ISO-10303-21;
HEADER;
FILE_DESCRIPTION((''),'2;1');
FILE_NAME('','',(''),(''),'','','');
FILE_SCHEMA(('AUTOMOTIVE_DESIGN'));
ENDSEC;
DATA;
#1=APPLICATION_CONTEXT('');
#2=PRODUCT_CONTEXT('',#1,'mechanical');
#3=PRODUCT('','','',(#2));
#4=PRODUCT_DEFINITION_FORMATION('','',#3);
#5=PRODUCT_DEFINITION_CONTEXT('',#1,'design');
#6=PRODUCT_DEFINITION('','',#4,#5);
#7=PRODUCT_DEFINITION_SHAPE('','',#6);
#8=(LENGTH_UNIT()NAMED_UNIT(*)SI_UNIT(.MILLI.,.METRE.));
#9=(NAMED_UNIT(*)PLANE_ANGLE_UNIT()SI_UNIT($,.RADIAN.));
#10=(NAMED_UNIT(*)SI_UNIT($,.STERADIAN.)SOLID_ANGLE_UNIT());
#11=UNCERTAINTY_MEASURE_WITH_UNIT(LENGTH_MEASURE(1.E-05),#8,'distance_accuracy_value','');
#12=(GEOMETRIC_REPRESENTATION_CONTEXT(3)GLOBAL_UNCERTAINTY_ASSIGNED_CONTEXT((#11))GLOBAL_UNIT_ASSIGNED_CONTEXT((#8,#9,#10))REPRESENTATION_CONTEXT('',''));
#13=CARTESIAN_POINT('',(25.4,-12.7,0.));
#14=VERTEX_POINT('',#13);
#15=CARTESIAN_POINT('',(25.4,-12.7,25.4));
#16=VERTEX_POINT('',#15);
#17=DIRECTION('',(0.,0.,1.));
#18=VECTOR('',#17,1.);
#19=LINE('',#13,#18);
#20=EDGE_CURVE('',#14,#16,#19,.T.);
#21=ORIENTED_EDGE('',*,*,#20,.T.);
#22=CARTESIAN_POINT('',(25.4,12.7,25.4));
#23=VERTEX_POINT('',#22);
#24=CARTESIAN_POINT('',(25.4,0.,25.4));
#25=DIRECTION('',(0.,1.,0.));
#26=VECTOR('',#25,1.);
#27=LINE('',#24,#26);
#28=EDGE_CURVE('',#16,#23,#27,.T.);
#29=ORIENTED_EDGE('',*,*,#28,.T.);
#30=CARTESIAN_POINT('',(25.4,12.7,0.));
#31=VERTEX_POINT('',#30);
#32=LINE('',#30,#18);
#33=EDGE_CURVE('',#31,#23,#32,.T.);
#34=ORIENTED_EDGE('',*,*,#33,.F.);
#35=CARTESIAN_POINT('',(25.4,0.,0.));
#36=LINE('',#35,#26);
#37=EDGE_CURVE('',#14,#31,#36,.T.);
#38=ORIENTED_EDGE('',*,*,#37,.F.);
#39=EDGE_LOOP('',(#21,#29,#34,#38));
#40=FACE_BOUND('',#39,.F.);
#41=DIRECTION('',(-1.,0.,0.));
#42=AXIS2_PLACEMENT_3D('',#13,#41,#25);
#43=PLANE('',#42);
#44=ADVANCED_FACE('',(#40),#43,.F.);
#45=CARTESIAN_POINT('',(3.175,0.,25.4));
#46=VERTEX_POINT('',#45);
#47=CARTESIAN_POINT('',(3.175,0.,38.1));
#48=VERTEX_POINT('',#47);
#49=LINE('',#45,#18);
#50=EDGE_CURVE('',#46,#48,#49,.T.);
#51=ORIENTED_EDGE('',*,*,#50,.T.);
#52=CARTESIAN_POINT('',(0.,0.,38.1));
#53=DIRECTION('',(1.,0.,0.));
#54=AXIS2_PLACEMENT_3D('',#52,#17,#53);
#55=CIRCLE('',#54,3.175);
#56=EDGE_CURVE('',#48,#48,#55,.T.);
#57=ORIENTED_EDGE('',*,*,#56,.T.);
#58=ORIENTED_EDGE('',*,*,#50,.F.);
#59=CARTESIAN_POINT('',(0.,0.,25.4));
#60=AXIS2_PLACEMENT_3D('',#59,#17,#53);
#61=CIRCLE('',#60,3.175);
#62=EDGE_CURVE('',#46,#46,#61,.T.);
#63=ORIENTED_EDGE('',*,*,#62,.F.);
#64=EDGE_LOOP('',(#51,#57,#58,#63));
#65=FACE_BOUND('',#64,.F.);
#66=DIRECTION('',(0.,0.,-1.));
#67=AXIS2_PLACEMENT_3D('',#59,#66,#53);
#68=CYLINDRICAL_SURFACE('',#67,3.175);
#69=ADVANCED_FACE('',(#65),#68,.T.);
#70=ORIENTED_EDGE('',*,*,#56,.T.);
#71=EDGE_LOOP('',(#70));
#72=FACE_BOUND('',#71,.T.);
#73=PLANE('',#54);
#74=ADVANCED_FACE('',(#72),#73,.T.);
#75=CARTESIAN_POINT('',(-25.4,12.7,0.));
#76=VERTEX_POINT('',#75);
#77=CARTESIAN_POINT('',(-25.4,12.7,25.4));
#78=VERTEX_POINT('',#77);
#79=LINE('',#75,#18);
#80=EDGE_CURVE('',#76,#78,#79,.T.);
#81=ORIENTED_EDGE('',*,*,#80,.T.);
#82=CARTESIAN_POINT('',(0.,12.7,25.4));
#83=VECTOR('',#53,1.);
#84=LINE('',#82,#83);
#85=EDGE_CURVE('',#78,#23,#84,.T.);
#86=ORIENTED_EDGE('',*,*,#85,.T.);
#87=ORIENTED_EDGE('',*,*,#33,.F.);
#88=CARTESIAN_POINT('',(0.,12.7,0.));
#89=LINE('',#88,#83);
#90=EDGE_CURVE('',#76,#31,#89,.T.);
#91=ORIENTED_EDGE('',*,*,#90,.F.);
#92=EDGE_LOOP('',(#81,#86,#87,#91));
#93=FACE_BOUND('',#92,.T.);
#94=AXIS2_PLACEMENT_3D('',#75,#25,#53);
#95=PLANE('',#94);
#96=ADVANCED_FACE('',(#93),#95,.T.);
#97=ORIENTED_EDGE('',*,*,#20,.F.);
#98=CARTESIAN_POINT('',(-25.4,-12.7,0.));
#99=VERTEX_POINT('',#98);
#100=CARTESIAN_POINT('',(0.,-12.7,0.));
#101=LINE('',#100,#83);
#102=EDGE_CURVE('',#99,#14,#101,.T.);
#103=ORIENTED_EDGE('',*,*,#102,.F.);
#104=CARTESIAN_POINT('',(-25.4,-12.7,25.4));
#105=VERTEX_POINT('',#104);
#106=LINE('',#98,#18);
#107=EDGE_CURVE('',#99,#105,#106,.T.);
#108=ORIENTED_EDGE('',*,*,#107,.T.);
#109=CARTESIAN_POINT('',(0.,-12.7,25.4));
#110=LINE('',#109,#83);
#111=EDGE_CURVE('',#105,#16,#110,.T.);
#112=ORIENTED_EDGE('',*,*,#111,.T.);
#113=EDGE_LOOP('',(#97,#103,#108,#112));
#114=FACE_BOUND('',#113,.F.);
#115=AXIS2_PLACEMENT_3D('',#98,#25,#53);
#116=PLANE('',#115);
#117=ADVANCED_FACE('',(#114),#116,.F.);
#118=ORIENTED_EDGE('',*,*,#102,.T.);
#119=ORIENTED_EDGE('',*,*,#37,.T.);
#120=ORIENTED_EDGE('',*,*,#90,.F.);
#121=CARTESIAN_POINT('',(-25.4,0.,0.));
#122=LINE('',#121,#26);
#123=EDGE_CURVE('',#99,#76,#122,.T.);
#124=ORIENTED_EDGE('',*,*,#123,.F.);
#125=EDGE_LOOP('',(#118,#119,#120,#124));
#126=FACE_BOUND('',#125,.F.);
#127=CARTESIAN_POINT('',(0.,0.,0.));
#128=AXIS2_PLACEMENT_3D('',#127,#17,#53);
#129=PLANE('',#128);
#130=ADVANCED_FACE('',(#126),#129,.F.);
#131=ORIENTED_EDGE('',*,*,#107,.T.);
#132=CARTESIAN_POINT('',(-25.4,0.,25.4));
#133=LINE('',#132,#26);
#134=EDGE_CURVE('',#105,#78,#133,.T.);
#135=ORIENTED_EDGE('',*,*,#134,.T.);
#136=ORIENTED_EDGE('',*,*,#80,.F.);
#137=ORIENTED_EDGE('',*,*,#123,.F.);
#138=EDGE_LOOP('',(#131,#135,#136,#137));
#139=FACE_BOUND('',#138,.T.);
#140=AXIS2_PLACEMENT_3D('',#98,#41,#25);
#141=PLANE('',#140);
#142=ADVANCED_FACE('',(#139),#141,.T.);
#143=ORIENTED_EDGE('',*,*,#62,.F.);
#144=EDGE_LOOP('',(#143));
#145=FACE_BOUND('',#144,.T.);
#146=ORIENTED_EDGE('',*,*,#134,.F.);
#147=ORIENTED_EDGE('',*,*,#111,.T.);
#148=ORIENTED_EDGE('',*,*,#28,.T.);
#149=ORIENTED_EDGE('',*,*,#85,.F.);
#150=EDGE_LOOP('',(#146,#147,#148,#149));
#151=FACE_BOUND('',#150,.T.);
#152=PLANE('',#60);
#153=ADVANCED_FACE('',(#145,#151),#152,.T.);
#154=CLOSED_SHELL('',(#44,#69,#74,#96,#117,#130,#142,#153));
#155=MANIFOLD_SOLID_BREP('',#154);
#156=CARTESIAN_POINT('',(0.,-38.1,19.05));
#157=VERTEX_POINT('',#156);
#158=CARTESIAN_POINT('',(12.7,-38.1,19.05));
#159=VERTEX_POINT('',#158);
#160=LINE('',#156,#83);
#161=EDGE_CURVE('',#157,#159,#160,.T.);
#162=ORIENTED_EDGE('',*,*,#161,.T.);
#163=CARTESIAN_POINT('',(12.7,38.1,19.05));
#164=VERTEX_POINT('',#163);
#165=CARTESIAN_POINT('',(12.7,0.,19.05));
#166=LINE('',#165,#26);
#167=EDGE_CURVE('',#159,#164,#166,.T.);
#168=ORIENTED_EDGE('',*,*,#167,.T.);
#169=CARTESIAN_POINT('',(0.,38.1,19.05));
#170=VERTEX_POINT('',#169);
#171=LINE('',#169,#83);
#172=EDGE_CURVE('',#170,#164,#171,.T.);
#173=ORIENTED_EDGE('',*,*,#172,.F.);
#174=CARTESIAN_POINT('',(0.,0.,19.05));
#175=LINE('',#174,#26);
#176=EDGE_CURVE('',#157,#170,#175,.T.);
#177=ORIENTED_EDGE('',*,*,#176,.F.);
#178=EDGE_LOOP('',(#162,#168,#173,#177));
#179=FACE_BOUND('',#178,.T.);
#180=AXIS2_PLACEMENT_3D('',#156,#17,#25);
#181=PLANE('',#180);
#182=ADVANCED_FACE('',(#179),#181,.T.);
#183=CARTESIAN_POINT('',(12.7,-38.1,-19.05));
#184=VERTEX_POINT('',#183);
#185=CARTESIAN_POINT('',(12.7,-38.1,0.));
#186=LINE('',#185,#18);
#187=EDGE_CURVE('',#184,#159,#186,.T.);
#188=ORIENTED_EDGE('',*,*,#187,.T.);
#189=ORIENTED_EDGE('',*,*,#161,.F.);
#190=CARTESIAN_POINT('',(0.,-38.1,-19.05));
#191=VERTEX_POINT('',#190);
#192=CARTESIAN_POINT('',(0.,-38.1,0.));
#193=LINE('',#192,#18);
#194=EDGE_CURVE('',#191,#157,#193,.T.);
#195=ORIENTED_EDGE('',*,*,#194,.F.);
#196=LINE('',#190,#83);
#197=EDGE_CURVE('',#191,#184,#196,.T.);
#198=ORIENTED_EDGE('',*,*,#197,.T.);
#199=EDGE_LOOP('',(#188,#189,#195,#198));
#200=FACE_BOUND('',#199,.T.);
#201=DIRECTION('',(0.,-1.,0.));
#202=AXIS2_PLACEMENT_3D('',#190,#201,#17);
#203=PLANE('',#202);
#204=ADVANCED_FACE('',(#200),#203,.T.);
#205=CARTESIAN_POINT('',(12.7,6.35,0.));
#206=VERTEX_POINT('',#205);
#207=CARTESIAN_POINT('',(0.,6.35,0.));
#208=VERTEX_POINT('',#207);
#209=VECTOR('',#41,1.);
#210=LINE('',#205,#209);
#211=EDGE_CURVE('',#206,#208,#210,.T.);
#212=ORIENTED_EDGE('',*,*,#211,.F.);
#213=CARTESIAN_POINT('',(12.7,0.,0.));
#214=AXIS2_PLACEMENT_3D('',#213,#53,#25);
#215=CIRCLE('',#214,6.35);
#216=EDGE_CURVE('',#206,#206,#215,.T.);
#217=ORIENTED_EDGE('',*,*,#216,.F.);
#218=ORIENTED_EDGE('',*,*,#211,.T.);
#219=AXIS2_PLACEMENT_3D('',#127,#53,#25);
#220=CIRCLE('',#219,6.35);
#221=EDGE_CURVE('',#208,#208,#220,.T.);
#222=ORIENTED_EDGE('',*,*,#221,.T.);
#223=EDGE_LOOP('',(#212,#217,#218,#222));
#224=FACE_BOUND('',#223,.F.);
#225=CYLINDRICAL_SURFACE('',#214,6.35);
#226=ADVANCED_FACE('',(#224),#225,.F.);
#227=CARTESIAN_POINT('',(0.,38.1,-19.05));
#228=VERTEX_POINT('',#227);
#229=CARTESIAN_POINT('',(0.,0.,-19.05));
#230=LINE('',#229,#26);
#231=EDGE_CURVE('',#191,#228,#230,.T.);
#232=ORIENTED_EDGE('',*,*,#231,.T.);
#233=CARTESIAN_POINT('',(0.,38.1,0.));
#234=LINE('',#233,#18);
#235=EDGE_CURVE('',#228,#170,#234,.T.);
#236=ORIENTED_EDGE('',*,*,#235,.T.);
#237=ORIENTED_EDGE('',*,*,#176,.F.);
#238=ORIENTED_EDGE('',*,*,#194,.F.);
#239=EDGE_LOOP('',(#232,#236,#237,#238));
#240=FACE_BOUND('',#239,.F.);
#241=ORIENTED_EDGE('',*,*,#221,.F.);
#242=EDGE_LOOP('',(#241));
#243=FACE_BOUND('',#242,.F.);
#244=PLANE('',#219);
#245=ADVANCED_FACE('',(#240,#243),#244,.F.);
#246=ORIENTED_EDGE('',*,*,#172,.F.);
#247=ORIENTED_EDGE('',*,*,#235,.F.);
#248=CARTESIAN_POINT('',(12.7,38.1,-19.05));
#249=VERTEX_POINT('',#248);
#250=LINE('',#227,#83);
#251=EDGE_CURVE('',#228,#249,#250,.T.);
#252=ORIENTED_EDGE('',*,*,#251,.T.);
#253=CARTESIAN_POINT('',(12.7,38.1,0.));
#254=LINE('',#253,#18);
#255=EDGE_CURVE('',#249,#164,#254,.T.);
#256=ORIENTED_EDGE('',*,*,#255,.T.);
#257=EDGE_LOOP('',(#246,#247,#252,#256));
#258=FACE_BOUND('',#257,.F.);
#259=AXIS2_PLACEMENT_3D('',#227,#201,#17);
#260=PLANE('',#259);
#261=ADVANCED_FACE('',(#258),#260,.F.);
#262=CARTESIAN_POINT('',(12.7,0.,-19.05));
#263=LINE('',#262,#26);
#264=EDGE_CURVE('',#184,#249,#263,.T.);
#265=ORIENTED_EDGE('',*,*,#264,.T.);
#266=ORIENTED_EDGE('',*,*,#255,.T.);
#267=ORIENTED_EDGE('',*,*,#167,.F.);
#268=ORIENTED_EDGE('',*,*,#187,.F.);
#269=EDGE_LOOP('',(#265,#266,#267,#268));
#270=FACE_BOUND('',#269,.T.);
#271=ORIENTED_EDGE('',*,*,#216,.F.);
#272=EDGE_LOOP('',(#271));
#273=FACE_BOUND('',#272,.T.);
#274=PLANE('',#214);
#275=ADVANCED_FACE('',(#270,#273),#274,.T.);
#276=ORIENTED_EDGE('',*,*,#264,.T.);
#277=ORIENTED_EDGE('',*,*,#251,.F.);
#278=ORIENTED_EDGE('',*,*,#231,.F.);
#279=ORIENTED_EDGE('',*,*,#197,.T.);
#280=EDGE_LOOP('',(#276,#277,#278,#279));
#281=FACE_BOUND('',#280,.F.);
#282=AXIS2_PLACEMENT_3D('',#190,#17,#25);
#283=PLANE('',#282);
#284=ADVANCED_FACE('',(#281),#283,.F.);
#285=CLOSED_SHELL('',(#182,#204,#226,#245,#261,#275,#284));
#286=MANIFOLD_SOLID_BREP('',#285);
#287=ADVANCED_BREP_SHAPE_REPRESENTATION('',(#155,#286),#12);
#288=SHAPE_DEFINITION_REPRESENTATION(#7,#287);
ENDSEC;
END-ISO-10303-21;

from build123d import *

# Parameters (mm, degrees)
F0_W     = 50.8
F0_H     = 25.4
F1_DEPTH = 25.4
F2_R     = 3.175
F3_DEPTH = 12.7
F4_W     = 76.2
F4_H     = 38.1
F5_DEPTH = 12.7
F6_R     = 6.35
F7_DEPTH = 38.101


with BuildPart() as f1:
    # F0 (on Top) → F1 (new body)
    with BuildSketch(Plane.XY):
        Rectangle(F0_W, F0_H)
    extrude(amount=F1_DEPTH)

    # F2 (on face) → F3 (join)
    with BuildSketch(Plane.XY.offset(25.4)):
        Circle(F2_R)
    extrude(amount=F3_DEPTH)


with BuildPart() as f5:
    # F4 (on Right) → F5 (new body)
    with BuildSketch(Plane.YZ):
        Rectangle(F4_W, F4_H)
    extrude(amount=F5_DEPTH)

    # F6 (on face) → F7 (cut, through all)
    with BuildSketch(Plane.YZ.offset(12.7)):
        Circle(F6_R)
    extrude(amount=-F7_DEPTH, mode=Mode.SUBTRACT)


solid = Compound([f1.part, f5.part])
